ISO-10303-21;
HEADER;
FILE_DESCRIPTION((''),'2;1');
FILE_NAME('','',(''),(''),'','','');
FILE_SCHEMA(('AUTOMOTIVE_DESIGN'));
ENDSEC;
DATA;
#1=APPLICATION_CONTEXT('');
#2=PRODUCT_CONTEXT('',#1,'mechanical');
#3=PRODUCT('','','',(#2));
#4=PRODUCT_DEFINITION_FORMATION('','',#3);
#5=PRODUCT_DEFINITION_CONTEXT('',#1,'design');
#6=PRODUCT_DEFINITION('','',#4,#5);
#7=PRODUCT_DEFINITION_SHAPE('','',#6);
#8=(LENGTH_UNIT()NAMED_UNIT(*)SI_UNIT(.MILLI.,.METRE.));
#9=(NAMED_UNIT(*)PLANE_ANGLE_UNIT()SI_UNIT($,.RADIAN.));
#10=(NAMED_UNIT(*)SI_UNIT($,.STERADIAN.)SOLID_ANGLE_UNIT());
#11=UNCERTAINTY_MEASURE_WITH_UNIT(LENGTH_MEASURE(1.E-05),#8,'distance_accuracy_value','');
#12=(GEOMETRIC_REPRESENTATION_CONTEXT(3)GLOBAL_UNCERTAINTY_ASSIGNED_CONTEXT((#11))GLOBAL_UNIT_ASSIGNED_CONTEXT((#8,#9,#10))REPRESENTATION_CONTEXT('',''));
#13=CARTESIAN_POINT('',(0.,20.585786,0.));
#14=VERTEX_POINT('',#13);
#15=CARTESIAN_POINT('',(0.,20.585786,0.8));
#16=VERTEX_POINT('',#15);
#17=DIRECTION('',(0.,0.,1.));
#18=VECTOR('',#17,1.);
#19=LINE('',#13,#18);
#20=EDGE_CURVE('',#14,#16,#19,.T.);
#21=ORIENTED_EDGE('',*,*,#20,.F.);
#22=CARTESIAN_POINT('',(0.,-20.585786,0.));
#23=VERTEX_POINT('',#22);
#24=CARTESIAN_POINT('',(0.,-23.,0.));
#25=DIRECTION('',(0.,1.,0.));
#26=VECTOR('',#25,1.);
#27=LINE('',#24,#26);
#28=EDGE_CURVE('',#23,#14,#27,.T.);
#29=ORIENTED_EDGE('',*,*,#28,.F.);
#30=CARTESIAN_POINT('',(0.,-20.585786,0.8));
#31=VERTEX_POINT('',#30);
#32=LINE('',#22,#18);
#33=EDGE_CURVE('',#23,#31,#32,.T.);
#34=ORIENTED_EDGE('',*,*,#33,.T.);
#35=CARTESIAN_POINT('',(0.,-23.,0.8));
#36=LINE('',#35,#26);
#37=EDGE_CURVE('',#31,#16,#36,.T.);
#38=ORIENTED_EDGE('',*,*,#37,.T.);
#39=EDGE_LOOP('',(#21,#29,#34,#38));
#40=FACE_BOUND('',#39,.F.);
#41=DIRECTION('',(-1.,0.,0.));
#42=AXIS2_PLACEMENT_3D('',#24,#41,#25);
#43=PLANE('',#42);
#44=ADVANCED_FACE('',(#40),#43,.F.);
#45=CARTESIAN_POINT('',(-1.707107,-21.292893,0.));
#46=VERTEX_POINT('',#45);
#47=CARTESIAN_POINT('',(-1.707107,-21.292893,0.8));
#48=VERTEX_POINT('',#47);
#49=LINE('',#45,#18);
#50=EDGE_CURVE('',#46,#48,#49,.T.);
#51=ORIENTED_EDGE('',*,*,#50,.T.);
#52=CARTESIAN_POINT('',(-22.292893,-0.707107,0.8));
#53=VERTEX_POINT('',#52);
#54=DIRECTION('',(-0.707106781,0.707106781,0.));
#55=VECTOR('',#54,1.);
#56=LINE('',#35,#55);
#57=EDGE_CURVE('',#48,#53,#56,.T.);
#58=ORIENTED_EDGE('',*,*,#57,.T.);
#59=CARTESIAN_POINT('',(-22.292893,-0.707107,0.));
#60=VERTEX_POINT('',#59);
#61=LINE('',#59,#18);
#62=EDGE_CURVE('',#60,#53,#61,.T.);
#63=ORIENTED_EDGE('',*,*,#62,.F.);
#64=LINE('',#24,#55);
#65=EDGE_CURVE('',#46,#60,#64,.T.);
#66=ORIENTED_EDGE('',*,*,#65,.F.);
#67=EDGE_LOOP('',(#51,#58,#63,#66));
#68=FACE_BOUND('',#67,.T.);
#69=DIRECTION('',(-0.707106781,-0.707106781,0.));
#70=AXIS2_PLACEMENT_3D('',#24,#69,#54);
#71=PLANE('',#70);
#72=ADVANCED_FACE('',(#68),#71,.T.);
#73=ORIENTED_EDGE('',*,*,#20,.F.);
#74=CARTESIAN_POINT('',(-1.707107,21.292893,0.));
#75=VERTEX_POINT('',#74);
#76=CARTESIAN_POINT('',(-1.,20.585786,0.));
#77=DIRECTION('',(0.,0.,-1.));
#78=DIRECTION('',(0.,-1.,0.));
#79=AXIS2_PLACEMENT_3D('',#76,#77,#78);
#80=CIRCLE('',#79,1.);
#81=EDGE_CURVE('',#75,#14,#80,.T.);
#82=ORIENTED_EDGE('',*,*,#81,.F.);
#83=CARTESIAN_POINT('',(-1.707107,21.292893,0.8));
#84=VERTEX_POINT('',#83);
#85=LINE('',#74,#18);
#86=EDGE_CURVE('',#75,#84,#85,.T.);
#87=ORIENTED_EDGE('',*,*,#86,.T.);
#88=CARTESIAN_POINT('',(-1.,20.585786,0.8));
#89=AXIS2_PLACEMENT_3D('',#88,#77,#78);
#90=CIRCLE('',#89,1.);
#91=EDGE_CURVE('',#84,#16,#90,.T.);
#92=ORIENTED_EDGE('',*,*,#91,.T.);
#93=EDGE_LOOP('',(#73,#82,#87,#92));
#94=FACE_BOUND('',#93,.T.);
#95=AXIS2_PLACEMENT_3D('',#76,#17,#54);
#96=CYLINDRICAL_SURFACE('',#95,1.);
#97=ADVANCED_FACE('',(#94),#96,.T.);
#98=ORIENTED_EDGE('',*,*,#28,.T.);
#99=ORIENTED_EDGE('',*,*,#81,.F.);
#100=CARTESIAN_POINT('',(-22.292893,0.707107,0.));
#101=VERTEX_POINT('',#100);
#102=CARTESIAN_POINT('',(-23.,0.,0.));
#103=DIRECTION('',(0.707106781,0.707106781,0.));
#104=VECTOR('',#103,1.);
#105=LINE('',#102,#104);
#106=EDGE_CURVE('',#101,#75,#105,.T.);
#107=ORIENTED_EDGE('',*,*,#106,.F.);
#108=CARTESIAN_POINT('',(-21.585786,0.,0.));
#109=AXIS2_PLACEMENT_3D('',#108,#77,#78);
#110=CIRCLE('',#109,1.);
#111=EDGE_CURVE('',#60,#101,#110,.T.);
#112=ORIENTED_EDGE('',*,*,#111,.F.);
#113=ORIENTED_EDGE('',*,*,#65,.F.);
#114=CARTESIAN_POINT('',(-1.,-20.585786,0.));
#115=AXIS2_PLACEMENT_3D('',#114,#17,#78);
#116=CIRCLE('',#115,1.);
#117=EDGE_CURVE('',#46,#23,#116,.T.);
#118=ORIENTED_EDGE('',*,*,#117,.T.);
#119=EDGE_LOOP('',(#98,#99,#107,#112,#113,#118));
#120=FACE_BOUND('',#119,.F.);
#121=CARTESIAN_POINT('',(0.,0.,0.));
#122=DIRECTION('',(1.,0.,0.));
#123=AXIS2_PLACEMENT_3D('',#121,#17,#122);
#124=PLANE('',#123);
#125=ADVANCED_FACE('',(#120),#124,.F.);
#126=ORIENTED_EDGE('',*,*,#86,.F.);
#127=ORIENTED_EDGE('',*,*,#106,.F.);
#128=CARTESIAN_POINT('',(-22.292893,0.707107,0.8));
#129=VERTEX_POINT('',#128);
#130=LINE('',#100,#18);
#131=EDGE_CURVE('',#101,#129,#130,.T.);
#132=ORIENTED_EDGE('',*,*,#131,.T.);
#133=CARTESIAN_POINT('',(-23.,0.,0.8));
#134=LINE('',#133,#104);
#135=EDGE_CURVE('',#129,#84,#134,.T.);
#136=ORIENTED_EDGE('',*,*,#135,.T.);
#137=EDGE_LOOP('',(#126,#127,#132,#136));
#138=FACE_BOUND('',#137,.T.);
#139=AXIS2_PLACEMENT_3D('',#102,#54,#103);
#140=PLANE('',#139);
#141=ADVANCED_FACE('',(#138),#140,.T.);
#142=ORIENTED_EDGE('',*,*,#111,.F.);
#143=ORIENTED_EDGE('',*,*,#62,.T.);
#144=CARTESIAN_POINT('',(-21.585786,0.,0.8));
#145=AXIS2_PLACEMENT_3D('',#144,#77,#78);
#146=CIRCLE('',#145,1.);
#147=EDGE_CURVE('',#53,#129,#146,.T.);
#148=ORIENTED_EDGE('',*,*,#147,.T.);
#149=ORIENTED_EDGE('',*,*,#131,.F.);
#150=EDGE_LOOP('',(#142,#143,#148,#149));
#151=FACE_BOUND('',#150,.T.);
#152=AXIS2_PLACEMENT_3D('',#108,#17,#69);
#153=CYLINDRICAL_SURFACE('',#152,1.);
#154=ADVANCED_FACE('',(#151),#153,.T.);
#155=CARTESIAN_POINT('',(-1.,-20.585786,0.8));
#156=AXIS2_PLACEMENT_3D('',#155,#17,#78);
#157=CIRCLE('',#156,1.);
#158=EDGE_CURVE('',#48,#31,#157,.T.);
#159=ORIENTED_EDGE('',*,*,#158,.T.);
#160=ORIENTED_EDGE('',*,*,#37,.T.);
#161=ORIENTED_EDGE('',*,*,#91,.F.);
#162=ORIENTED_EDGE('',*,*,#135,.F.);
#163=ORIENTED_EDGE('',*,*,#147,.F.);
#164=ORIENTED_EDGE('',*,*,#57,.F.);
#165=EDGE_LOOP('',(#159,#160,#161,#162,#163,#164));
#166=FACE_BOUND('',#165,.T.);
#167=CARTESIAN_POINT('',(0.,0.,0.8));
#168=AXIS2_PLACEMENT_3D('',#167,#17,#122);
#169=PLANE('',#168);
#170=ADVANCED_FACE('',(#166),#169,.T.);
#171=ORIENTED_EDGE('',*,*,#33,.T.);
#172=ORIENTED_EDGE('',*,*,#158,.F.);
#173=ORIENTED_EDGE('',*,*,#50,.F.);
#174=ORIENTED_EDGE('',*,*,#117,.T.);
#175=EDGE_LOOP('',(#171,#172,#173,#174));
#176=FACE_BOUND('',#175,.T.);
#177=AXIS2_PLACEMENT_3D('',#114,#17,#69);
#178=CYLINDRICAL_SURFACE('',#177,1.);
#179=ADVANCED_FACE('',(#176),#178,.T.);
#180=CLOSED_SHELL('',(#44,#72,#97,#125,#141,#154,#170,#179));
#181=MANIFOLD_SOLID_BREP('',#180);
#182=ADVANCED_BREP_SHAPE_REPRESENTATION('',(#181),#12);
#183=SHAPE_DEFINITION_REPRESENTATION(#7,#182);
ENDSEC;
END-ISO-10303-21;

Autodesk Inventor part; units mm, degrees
ref_plane "YZ Plane" through (0, 0, 0) normal (1, 0, 0) x (0, 1, 0)
ref_plane "XZ Plane" through (0, 0, 0) normal (0, 1, 0) x (-1, 0, 0)
ref_plane "XY Plane" through (0, 0, 0) normal (0, 0, 1) x (1, 0, 0)
sketch "Sketch1" plane through (0, 0, 0) normal (0, 0, 1) x (1, 0, 0)
  line L0 (0, -23) -> (0, 23)
  line L1 (0, -23) -> (-23, 0)
  line L2 (-23, 0) -> (0, 23)
  point P0 (0, 0)
  point P1 (0, 0)
  point P2 (0, 0)
  dimension "d1" = 46
  dimension "d9" = 23
extrude "Plate1" add sketch "Sketch1" along normal blind 0.8
fillet "Corner Round2" radius 1 3 edges at (0, -23, 0.4) (-23, 0, 0.4) (0, 23, 0.4)
equation "\"d2\" = Thickness"
equation "\"BendReliefWidth\" = Thickness"
equation "\"BendReliefDepth\" = 0.5 * Thickness"
equation "\"CornerReliefSize\" = 4 * Thickness"
equation "\"MinimumRemnant\" = 2 * Thickness"
equation "\"TransitionRadius\" = BendRadius"
equation "\"JacobiRadiusSize\" = BendRadius"
equation "\"GapSize\" = Thickness"
equation "\"Thickness\" = 0.8"
equation "\"BendRadius\" = 2.75"
properties part number "MNT-CDF-605 CAP" material "Stainless Steel"
